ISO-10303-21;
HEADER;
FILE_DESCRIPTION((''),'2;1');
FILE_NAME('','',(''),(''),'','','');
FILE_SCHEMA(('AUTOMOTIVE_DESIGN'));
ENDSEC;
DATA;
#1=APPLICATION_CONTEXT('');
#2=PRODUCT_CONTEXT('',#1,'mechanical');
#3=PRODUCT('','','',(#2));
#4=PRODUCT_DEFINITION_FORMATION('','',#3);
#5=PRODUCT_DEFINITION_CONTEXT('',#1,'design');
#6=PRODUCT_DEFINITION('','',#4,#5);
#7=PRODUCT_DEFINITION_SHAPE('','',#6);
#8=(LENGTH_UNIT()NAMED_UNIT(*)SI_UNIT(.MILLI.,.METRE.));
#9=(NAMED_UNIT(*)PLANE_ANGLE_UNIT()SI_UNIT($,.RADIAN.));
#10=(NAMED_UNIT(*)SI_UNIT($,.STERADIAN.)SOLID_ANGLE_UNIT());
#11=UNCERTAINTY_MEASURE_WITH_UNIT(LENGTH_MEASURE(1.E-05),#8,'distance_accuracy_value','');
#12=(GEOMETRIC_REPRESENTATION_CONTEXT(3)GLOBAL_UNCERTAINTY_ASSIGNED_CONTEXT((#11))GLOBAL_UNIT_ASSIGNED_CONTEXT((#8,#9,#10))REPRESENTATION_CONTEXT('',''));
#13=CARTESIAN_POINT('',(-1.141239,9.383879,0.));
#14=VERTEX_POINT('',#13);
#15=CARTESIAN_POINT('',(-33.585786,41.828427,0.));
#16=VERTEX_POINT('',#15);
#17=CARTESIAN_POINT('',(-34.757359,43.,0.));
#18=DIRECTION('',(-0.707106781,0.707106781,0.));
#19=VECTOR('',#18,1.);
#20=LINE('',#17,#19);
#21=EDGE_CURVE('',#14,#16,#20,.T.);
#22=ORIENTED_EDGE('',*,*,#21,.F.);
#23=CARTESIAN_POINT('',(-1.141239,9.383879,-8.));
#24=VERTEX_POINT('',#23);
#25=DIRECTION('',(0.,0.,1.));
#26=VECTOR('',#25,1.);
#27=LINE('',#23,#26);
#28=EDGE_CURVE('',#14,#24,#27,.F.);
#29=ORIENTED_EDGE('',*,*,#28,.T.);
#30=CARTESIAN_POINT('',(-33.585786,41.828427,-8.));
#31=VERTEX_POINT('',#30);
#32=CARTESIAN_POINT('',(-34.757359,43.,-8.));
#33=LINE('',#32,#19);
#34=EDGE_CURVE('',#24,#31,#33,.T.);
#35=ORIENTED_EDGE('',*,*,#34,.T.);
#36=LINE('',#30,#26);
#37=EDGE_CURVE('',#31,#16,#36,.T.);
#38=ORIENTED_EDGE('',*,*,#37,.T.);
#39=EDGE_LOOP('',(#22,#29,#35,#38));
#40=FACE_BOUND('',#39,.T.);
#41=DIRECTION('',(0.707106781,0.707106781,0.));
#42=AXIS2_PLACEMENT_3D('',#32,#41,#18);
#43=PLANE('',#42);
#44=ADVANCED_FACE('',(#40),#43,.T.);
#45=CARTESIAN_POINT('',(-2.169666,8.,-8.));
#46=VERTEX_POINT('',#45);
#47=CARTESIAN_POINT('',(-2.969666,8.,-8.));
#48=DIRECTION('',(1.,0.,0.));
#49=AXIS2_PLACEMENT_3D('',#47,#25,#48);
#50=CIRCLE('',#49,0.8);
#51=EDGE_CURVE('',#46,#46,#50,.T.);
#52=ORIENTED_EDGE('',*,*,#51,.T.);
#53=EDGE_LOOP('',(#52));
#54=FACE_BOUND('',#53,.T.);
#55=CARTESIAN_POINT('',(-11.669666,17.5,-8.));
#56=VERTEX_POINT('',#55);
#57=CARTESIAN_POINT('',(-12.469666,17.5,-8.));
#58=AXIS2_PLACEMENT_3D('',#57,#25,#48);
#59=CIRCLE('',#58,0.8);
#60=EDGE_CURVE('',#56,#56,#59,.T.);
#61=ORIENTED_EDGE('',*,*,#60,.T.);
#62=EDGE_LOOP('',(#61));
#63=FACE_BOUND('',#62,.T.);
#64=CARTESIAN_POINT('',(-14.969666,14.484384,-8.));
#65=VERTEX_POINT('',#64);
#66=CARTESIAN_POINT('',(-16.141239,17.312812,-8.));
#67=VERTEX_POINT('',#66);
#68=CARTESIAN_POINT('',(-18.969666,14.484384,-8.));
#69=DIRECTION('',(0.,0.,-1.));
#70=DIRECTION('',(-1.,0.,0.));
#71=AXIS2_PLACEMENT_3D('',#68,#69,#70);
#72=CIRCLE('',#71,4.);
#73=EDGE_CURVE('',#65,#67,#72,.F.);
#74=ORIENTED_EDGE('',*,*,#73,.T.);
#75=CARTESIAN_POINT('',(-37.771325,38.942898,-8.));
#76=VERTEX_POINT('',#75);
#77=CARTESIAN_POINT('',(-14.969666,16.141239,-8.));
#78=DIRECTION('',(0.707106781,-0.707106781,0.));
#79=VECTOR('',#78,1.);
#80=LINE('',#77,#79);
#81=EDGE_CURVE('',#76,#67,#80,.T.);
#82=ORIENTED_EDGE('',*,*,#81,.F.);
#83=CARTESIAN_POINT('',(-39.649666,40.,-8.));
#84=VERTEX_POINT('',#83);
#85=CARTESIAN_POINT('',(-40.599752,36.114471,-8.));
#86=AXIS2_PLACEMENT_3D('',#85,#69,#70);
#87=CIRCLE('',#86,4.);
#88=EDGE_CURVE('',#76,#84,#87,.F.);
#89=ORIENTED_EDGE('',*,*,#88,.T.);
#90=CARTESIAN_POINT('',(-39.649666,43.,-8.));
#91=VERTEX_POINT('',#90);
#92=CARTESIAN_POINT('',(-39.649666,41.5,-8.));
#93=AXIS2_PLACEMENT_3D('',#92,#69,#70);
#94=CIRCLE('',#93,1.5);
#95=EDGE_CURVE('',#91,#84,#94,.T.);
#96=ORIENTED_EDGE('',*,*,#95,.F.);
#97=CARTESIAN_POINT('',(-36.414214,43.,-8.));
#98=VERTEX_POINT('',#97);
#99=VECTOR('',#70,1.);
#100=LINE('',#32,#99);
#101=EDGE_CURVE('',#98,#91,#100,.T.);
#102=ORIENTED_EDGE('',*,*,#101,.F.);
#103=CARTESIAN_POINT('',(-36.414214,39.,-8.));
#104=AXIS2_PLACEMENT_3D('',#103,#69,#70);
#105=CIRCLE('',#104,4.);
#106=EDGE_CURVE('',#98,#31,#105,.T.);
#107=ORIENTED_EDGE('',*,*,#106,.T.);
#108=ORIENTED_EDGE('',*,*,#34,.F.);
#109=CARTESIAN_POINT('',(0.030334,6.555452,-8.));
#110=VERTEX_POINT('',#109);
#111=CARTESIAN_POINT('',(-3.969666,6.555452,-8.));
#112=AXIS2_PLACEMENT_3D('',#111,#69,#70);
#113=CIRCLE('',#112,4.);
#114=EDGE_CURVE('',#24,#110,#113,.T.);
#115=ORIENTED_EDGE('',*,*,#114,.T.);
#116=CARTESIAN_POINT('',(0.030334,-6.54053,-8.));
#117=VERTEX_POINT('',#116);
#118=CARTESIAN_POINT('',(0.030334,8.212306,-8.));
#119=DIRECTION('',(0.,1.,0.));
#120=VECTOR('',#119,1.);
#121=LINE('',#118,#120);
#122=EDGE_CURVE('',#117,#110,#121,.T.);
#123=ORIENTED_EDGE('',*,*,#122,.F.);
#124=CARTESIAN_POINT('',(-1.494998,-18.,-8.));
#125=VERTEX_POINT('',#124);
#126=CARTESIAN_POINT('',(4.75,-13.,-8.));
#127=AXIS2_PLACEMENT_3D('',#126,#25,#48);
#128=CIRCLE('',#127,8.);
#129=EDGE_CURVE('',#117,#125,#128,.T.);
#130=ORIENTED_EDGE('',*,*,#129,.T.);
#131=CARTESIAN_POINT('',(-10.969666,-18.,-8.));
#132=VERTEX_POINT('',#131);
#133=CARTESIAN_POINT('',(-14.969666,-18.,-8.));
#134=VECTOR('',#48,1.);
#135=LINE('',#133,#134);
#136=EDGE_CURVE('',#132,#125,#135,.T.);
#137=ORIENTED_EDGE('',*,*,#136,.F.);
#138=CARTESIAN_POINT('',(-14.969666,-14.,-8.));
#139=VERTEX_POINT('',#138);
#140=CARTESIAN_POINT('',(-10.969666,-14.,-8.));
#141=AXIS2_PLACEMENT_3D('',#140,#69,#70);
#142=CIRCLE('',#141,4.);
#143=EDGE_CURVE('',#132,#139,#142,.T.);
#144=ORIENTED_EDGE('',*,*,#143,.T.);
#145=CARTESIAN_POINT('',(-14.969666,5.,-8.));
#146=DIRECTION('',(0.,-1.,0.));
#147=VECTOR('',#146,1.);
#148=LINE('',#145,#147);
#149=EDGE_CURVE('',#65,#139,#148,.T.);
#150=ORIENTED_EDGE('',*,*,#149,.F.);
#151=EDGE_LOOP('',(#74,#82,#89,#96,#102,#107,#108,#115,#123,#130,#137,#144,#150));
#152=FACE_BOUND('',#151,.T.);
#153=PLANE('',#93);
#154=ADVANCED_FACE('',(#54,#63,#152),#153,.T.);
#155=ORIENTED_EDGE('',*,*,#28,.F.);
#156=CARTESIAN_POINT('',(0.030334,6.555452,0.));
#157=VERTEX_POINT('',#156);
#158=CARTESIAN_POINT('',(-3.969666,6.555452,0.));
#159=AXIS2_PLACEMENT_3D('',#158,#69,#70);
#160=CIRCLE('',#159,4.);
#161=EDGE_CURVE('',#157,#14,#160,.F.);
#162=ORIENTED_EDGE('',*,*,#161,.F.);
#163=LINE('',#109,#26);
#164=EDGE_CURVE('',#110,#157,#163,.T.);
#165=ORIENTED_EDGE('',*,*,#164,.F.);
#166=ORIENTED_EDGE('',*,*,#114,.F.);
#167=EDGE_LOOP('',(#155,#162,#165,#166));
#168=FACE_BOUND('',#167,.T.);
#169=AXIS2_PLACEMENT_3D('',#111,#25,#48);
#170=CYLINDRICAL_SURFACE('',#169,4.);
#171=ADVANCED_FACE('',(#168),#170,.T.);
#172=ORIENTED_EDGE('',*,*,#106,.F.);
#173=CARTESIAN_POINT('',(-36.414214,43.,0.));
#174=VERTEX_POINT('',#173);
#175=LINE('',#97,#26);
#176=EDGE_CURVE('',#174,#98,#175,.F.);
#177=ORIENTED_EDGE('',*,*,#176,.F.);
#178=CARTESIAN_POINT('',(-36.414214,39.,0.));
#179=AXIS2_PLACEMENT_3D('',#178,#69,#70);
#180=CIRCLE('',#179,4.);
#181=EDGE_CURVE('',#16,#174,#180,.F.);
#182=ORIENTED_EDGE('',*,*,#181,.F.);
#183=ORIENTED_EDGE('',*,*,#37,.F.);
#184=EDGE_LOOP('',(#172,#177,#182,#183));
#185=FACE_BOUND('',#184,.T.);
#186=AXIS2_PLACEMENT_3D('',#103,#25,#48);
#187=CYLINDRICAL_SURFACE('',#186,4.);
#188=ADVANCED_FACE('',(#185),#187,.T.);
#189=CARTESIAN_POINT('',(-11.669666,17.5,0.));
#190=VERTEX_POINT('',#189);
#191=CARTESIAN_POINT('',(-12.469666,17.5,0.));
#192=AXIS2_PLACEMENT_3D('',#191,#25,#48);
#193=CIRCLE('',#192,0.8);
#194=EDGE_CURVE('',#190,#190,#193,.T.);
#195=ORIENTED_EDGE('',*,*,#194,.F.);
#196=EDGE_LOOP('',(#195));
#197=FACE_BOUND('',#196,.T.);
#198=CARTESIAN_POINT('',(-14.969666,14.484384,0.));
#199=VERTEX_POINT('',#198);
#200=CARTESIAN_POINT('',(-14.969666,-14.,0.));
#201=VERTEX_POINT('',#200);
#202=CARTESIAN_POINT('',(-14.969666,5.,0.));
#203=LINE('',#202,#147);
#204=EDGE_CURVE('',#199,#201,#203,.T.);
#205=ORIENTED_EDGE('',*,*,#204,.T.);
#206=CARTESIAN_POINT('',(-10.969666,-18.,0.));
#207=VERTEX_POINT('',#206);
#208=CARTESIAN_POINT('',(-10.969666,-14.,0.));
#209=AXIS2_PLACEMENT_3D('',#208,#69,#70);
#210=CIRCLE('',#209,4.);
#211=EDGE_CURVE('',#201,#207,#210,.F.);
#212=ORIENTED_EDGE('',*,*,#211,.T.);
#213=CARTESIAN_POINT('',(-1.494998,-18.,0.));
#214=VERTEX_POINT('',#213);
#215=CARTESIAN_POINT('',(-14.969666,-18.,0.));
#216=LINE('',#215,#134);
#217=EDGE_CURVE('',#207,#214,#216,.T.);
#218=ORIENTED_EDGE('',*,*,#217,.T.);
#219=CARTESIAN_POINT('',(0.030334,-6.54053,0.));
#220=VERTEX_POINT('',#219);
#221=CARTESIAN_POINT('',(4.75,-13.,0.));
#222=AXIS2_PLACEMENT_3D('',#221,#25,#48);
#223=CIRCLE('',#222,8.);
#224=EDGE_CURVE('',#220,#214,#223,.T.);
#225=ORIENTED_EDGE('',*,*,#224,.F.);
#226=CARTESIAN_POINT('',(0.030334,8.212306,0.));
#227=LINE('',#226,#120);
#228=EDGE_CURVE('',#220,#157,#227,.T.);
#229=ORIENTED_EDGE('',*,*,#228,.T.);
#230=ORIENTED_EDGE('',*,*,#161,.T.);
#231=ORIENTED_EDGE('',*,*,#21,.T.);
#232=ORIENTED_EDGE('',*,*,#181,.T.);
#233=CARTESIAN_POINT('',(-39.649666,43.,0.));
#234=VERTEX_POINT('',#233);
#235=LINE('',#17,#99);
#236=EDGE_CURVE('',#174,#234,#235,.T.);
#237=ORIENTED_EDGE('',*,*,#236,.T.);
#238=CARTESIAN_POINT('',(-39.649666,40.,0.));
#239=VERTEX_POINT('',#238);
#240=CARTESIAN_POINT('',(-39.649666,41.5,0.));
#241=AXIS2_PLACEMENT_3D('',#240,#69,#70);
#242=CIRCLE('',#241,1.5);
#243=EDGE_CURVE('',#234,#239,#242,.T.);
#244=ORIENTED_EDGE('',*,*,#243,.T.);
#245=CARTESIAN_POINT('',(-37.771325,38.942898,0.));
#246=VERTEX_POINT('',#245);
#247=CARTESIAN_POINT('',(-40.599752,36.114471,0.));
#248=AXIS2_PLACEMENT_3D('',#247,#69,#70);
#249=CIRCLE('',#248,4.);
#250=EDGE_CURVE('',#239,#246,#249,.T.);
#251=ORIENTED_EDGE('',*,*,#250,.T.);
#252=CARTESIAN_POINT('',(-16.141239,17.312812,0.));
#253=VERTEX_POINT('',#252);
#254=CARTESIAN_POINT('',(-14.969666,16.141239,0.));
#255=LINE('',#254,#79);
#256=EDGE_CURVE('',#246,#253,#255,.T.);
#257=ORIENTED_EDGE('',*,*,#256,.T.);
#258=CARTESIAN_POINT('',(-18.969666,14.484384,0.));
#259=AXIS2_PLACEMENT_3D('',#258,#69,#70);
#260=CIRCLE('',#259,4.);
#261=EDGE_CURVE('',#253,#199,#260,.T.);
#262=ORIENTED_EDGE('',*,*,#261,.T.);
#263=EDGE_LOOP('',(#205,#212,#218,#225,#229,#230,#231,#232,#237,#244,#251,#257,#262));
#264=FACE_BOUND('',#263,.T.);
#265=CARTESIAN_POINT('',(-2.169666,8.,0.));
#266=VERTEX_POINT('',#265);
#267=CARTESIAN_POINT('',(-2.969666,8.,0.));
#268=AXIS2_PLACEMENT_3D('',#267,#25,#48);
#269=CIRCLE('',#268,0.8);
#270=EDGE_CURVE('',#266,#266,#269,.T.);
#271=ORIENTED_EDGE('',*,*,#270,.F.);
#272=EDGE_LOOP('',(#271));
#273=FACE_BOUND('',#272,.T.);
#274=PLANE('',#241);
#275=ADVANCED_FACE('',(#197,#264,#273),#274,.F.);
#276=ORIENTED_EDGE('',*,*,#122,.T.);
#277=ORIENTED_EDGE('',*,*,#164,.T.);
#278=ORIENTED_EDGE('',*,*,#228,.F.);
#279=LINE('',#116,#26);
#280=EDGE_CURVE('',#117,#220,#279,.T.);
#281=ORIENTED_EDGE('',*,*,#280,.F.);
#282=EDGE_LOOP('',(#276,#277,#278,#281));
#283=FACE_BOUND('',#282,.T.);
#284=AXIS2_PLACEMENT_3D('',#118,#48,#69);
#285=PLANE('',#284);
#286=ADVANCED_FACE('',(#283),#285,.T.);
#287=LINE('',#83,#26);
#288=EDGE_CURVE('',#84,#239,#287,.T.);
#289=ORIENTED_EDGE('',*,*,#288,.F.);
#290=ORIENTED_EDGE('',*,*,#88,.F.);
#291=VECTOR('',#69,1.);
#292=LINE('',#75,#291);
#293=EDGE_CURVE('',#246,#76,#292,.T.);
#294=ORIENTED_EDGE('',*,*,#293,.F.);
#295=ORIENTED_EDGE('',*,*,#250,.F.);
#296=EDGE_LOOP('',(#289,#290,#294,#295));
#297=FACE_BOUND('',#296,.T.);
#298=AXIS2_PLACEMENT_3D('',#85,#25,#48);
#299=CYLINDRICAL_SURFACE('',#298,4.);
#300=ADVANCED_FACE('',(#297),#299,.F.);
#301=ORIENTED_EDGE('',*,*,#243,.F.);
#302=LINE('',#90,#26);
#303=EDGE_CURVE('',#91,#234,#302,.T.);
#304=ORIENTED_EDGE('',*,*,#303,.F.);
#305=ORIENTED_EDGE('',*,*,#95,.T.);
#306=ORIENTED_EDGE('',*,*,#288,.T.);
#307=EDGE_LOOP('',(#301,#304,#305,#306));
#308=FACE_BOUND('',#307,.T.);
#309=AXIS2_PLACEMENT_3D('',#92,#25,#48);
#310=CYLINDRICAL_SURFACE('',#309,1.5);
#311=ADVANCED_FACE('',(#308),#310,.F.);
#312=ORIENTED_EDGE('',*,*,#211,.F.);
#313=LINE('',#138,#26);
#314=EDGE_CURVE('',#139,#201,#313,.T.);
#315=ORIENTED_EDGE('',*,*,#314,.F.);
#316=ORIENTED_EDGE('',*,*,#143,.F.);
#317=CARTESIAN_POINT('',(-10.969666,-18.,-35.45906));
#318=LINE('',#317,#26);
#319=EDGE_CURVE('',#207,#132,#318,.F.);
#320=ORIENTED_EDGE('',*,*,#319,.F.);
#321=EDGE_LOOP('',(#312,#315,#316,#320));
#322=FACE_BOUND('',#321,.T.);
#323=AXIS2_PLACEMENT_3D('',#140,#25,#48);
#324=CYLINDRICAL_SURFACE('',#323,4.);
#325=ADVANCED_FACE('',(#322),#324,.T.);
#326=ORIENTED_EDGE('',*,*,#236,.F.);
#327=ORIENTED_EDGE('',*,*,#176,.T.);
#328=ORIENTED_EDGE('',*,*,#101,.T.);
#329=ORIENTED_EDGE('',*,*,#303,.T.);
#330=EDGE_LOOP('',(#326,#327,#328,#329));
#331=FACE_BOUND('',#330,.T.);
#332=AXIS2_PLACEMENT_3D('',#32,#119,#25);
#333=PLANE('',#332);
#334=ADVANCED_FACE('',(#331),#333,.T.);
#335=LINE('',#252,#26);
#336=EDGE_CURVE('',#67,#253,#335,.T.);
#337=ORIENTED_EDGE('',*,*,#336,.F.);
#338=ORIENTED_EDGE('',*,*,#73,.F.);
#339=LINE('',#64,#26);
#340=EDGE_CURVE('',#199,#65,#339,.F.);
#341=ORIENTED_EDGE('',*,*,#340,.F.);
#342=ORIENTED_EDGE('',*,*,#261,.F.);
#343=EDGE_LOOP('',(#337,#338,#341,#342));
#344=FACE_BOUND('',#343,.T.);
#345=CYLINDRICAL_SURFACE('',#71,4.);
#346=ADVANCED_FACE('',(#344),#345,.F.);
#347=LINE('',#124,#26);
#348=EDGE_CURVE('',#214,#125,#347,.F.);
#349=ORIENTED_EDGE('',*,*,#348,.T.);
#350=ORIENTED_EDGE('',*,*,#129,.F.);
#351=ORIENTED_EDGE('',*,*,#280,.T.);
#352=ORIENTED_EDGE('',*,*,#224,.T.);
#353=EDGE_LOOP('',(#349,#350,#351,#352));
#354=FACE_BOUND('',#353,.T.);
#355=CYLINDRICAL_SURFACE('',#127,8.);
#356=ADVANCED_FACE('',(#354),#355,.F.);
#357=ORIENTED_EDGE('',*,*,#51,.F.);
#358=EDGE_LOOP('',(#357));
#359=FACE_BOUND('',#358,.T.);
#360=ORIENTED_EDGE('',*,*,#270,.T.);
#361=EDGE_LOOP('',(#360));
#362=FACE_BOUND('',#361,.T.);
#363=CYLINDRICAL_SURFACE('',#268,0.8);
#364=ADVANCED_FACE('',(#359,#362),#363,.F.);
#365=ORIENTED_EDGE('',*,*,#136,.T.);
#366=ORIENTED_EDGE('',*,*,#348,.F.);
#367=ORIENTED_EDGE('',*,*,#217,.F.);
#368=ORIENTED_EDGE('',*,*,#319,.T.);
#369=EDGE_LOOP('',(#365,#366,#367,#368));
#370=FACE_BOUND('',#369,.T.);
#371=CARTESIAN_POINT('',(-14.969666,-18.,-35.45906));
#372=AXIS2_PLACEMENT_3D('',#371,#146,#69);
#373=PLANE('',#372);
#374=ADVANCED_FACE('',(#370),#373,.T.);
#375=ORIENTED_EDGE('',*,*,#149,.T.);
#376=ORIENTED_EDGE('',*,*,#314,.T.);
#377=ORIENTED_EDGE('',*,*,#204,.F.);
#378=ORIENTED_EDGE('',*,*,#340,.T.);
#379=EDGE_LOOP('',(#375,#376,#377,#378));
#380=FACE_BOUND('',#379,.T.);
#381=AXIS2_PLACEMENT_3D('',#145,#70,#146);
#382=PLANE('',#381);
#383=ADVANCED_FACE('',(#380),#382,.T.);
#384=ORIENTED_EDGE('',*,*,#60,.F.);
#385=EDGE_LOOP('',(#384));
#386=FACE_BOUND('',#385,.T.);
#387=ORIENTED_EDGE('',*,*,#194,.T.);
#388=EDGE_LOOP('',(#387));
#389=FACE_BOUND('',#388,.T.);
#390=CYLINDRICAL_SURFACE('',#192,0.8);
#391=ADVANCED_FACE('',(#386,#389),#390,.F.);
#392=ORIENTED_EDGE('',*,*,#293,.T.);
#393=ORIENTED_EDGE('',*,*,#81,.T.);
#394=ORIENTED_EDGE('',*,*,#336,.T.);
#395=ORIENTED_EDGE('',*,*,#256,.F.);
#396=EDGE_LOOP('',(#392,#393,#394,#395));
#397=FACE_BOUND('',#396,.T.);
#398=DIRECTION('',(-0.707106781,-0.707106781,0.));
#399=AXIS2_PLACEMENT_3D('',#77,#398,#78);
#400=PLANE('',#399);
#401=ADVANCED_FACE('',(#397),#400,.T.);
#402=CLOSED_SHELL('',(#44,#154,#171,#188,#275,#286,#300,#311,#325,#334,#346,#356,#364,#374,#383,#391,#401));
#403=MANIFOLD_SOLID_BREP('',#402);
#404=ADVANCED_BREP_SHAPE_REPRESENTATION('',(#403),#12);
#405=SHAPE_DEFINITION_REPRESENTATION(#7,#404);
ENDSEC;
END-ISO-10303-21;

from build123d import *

# Parameters (mm, degrees)
EXTRUDE_618_DEPTH   = 8
HOLE_WIZARD_M2_D    = 1.6
SKETCH_5_W          = 15
SKETCH_5_H          = 23
EXTRUDE_1905_DEPTH  = 8
FILLET_1_R          = 4
CUT_EXTRUDE_1_DEPTH = 60.03470161


with BuildPart() as part:
    # Эскиз1 → Extrude 618 (new body)
    with BuildSketch(Plane.XY):
        with BuildLine():
            Line((0.03033425, 5), (-14.96966575, 5))
            Line((-14.96966575, 5), (-14.96966575, 16.141238626))
            Line((-14.96966575, 16.141238626), (-38.828427125, 40))
            Line((-38.828427125, 40), (-39.64966575, 40))
            ThreePointArc((-39.64966575, 40), (-38.14966575, 41.5), (-39.64966575, 43))
            Line((-39.64966575, 43), (-34.757359313, 43))
            Line((-34.757359313, 43), (0.03033425, 8.212306438))
            Line((0.03033425, 8.212306438), (0.03033425, 5))
        make_face()
    extrude(amount=-EXTRUDE_618_DEPTH)

    # Крепление M2 (through all)
    with Locations(Plane.XY):
        with Locations((-2.96966575, 8), (-12.46966575, 17.5)):
            Hole(HOLE_WIZARD_M2_D / 2)

    # Эскиз5 → Extrude 1905 (add)
    with BuildSketch(Plane.XY):
        with Locations((-7.46966575, -6.5)):
            Rectangle(SKETCH_5_W, SKETCH_5_H)
    extrude(amount=-EXTRUDE_1905_DEPTH)

    # Скругление1
    # the kernel refuses this fillet: 4 mm, written as the material it adds along each edge
    with BuildSketch(Plane(origin=(-38.828427125, 40, 0), x_dir=(-1.0, -1.0209461682873532e-12, 0), z_dir=(0, 0, -1))) as fillet_1_piece_1:
        with BuildLine():
            CenterArc((1.771325284, -3.885528966), FILLET_1_R, 103.740313028, 31.259686972)
            Line((-1.057101841, -1.057101841), (0, 0))
            Line((0, 0), (0.821238626, 0))
        make_face()
    extrude(amount=8)
    with BuildSketch(Plane(origin=(-14.96966575, 16.141238626, 0), x_dir=(-0.7071067811865497, 0.7071067811865454, 0), z_dir=(0, 0, -1))) as fillet_1_piece_2:
        with BuildLine():
            CenterArc((FILLET_1_R * 0.414213562373, -FILLET_1_R), FILLET_1_R, 90, 45)
            Line((-FILLET_1_R * 0.292893218813, -FILLET_1_R * 0.292893218813), (0, 0))
            Line((0, 0), (FILLET_1_R * 0.414213562373, 0))
        make_face()
    extrude(amount=8)
    # the kernel refuses this fillet: 4 mm, written as the material it takes off along each edge
    with BuildSketch(Plane(origin=(-34.757359313, 43, 4.142135624), x_dir=(0.7071067811865497, -0.7071067811865454, 0), z_dir=(0, 0, -1)), Plane(origin=(0.03033425, 8.212306438, 4.142135624), x_dir=(0, -1, 0), z_dir=(0, 0, -1))) as fillet_1_2_piece_1:
        with BuildLine():
            CenterArc((FILLET_1_R * 0.414213562373, FILLET_1_R), FILLET_1_R, 225, 45)
            Line((-FILLET_1_R * 0.292893218813, FILLET_1_R * 0.292893218813), (0, 0))
            Line((0, 0), (FILLET_1_R * 0.414213562373, 0))
        make_face()
    extrude(amount=16.284271247, mode=Mode.SUBTRACT)
    with BuildSketch(Plane(origin=(-14.96966575, -18, 10), x_dir=(1, 0, 0), z_dir=(0, 0, -1))) as fillet_1_2_piece_2:
        with BuildLine():
            CenterArc((FILLET_1_R, -FILLET_1_R), FILLET_1_R, 90, 90)
            Line((0, -FILLET_1_R), (0, 0))
            Line((0, 0), (FILLET_1_R, 0))
        make_face()
    extrude(amount=28, mode=Mode.SUBTRACT)

    # Эскиз6 → Вырез-Вытянуть1 (cut, through all)
    with BuildSketch(Plane.XY):
        with BuildLine():
            Line((0.03033425, -6.540529805), (0.03033425, -19.459470195))
            ThreePointArc((0.03033425, -19.459470195), (-3.25, -13), (0.03033425, -6.540529805))
        make_face()
    extrude(amount=-CUT_EXTRUDE_1_DEPTH, mode=Mode.SUBTRACT)


solid = part.part
